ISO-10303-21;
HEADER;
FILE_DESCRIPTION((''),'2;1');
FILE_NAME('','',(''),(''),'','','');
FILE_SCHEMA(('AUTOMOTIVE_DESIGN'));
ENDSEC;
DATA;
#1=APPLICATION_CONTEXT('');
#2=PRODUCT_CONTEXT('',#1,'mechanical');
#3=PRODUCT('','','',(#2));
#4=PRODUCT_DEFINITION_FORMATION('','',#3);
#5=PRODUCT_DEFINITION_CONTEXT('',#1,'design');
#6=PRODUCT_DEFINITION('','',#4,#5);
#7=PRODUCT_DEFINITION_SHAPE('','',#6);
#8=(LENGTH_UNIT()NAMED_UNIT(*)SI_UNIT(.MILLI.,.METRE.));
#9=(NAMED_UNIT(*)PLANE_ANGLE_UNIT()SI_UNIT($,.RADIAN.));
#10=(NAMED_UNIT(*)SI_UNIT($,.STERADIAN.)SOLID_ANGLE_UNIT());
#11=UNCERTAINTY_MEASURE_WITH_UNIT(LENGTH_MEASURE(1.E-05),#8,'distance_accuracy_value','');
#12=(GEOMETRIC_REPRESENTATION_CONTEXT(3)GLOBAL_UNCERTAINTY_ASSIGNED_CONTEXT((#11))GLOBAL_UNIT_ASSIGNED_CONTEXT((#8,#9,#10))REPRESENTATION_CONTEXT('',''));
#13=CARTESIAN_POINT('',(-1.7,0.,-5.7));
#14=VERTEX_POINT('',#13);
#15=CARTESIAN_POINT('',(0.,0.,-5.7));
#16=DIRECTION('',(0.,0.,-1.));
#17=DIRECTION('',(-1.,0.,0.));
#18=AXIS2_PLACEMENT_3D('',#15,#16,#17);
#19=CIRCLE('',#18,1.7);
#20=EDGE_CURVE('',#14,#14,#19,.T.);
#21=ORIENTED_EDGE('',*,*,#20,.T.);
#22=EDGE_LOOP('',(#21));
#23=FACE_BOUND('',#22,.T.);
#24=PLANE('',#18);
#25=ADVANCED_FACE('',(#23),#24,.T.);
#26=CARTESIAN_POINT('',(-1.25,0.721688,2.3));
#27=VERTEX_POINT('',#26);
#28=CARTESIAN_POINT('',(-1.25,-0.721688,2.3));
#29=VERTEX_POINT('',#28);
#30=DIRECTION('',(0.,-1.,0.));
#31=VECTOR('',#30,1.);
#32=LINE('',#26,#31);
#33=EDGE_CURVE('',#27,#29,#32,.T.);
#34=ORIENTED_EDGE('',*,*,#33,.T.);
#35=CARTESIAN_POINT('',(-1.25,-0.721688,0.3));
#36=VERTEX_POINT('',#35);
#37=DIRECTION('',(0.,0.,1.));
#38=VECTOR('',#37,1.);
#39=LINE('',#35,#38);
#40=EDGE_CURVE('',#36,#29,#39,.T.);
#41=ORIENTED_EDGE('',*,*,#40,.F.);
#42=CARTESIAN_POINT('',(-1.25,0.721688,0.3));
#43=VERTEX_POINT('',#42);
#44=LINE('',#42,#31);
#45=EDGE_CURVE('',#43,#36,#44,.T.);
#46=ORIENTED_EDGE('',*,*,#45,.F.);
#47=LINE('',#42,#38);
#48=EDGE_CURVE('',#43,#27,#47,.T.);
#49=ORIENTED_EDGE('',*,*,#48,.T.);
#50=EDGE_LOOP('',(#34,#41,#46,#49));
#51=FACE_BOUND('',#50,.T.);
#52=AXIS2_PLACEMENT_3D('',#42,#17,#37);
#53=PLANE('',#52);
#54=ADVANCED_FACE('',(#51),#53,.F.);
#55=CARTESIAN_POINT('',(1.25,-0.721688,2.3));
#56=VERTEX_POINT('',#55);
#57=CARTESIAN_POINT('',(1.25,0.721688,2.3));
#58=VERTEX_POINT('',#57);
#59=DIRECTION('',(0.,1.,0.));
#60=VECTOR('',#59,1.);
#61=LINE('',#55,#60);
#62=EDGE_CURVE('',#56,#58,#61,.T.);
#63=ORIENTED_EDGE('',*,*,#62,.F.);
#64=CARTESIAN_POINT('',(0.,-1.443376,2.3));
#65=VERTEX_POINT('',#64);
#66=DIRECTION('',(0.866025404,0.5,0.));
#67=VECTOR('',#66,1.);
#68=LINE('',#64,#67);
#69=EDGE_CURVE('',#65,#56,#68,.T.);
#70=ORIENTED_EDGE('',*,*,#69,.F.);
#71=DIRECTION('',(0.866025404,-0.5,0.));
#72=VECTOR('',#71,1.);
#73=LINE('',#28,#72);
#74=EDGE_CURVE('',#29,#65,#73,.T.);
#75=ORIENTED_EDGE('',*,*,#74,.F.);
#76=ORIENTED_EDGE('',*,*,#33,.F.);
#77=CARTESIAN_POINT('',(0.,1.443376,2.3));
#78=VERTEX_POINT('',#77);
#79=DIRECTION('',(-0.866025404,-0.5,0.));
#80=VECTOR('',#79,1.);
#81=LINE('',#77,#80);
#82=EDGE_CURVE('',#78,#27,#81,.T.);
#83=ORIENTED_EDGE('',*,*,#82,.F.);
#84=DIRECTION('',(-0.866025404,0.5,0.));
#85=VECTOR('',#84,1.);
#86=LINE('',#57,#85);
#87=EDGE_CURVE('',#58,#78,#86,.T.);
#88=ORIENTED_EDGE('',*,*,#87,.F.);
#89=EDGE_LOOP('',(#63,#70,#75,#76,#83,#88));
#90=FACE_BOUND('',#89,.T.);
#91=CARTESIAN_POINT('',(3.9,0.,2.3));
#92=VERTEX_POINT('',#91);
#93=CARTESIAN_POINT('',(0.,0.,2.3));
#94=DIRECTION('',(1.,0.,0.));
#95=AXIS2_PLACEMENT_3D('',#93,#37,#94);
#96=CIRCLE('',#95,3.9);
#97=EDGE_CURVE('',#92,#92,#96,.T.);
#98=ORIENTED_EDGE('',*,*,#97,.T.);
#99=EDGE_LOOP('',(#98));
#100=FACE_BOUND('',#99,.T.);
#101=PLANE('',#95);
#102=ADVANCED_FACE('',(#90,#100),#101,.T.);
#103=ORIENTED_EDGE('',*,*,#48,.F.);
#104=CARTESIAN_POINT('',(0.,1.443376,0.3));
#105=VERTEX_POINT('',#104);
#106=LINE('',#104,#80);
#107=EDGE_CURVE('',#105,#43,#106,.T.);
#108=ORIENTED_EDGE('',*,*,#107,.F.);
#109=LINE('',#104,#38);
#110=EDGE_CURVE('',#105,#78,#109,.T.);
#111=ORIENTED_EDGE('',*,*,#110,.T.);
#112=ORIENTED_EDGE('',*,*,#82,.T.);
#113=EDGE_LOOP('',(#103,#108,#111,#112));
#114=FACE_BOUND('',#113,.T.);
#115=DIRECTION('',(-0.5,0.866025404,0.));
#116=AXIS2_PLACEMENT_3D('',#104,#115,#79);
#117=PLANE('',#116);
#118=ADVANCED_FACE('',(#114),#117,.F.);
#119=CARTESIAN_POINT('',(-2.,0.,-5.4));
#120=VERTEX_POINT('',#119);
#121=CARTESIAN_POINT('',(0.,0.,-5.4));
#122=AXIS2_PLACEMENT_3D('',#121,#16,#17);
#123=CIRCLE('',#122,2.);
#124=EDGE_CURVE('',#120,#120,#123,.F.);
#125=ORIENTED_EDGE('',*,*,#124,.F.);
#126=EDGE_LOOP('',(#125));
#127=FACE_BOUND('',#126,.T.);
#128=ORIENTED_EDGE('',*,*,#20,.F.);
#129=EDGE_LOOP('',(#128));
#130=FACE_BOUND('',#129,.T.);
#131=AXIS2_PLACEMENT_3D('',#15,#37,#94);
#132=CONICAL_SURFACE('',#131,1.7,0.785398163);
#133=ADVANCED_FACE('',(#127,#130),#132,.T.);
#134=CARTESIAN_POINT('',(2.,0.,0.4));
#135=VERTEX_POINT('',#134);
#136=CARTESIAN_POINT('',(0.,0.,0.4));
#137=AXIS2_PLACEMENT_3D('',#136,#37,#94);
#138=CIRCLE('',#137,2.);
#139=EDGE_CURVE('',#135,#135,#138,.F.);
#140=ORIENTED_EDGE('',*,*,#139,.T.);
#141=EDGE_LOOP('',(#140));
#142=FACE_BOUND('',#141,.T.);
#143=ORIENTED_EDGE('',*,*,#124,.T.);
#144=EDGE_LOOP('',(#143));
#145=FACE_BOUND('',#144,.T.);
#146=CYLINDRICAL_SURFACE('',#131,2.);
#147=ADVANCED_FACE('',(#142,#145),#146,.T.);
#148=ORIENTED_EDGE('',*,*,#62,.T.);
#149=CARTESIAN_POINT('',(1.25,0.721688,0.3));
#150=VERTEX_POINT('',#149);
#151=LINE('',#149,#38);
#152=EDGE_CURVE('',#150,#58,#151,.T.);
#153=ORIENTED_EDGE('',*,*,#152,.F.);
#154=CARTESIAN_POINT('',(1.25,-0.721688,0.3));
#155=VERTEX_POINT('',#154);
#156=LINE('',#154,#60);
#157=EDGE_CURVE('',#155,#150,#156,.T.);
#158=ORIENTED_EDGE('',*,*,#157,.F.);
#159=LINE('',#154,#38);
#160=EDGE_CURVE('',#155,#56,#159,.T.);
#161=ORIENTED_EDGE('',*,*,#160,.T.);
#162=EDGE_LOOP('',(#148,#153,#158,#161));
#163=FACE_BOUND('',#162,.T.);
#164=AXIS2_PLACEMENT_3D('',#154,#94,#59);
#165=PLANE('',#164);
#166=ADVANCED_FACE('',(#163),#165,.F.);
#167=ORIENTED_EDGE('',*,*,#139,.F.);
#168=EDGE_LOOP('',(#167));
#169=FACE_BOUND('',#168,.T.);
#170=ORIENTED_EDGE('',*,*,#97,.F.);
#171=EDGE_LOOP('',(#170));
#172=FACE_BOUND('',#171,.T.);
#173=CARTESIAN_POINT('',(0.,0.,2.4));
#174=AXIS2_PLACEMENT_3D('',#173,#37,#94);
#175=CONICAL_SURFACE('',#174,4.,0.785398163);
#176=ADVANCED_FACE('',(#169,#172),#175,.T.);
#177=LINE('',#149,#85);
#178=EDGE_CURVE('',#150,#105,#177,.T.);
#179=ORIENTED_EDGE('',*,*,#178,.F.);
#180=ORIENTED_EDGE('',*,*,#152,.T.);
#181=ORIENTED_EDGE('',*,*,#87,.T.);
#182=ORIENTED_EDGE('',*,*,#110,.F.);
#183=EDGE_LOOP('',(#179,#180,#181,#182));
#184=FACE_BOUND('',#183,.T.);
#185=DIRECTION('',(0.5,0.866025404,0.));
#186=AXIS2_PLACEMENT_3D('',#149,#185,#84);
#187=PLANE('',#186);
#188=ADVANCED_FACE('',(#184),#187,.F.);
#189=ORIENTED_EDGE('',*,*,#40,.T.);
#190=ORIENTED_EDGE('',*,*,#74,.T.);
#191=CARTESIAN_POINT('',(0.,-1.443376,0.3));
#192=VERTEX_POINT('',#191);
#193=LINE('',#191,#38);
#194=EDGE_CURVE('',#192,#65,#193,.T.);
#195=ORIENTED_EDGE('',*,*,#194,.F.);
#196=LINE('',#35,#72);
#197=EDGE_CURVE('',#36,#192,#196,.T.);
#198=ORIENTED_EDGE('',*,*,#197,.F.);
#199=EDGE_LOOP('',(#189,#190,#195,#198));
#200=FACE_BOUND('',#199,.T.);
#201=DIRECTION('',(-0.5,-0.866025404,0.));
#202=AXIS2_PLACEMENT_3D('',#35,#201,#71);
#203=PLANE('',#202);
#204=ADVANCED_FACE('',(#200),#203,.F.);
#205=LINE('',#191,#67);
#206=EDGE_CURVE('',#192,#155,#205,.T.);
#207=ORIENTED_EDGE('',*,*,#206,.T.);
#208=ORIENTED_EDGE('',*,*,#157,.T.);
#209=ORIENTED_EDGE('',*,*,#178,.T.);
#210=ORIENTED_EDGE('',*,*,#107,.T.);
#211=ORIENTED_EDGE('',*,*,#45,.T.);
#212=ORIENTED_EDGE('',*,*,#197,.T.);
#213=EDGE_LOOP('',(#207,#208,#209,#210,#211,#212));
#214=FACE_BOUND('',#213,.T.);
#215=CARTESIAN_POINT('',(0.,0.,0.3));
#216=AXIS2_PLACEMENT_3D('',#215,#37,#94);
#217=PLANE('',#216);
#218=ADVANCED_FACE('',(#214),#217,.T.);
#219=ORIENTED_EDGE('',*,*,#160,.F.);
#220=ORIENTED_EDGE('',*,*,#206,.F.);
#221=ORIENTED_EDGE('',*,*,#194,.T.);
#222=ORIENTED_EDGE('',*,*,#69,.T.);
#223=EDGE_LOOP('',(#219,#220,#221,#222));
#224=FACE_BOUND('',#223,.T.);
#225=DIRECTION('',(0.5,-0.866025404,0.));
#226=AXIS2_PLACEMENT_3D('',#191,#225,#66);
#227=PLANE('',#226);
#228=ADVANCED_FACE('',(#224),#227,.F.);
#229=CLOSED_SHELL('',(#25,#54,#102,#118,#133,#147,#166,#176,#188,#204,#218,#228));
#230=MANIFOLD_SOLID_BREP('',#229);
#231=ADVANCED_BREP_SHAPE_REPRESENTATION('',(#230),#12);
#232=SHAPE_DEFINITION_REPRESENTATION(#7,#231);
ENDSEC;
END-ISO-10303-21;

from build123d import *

# Parameters (mm, degrees)
SKETCH1_R           = 4
BOSS_EXTRUDE1_DEPTH = 2.3
SKETCH2_R           = 2
BOSS_EXTRUDE2_DEPTH = 5.7
CHAMFER1_SIZE       = 0.3
CUT_EXTRUDE1_DEPTH  = 2
CHAMFER2_SIZE       = 2.4


with BuildPart() as part:
    # Sketch1 → Boss-Extrude1 (new body)
    with BuildSketch(Plane.XY):
        Circle(SKETCH1_R)
    extrude(amount=BOSS_EXTRUDE1_DEPTH)

    # Sketch2 → Boss-Extrude2 (add)
    with BuildSketch(Plane(origin=(0, 0, 0), x_dir=(-1, 0, 0), z_dir=(0, 0, -1))):
        with Locations(Location((0, 0, 0), (0, 0, 180))):
            Circle(SKETCH2_R)
    extrude(amount=BOSS_EXTRUDE2_DEPTH)

    # Chamfer1
    chamfer1_edges = [part.edges().sort_by_distance(p)[0] for p in [
        (-2, 0, -5.7),
    ]]
    chamfer(chamfer1_edges, length=CHAMFER1_SIZE)

    # Sketch3 → Cut-Extrude1 (cut)
    with BuildSketch(Plane.XY.offset(2.3)):
        Polygon((0, 1.443375673), (-1.25, 0.721687836), (-1.25, -0.721687836), (0, -1.443375673), (1.25, -0.721687836), (1.25, 0.721687836), align=None)
    extrude(amount=-CUT_EXTRUDE1_DEPTH, mode=Mode.SUBTRACT)

    # Chamfer2
    # the kernel refuses this chamfer: 2.4 mm, written as the material it takes off along each edge
    with BuildSketch(Plane(origin=(0, 0, 0), x_dir=(1, 0, 0), z_dir=(0, -1, 0))) as chamfer2_piece_1_section:
        Polygon((4 - CHAMFER2_SIZE, 0), (4, CHAMFER2_SIZE), (4, 0), align=None)
    chamfer2_piece_1 = revolve(axis=Axis((0, 0, 0), (0, 0, 1)), mode=Mode.PRIVATE)
    chamfer2_piece_1 = chamfer2_piece_1 - Plane(origin=(0, 0, 1.405884102), x_dir=(1, 0, 0), z_dir=(0, 0, 1)) * Cylinder(2, 16, mode=Mode.PRIVATE)
    add(chamfer2_piece_1, mode=Mode.SUBTRACT)


solid = part.part
